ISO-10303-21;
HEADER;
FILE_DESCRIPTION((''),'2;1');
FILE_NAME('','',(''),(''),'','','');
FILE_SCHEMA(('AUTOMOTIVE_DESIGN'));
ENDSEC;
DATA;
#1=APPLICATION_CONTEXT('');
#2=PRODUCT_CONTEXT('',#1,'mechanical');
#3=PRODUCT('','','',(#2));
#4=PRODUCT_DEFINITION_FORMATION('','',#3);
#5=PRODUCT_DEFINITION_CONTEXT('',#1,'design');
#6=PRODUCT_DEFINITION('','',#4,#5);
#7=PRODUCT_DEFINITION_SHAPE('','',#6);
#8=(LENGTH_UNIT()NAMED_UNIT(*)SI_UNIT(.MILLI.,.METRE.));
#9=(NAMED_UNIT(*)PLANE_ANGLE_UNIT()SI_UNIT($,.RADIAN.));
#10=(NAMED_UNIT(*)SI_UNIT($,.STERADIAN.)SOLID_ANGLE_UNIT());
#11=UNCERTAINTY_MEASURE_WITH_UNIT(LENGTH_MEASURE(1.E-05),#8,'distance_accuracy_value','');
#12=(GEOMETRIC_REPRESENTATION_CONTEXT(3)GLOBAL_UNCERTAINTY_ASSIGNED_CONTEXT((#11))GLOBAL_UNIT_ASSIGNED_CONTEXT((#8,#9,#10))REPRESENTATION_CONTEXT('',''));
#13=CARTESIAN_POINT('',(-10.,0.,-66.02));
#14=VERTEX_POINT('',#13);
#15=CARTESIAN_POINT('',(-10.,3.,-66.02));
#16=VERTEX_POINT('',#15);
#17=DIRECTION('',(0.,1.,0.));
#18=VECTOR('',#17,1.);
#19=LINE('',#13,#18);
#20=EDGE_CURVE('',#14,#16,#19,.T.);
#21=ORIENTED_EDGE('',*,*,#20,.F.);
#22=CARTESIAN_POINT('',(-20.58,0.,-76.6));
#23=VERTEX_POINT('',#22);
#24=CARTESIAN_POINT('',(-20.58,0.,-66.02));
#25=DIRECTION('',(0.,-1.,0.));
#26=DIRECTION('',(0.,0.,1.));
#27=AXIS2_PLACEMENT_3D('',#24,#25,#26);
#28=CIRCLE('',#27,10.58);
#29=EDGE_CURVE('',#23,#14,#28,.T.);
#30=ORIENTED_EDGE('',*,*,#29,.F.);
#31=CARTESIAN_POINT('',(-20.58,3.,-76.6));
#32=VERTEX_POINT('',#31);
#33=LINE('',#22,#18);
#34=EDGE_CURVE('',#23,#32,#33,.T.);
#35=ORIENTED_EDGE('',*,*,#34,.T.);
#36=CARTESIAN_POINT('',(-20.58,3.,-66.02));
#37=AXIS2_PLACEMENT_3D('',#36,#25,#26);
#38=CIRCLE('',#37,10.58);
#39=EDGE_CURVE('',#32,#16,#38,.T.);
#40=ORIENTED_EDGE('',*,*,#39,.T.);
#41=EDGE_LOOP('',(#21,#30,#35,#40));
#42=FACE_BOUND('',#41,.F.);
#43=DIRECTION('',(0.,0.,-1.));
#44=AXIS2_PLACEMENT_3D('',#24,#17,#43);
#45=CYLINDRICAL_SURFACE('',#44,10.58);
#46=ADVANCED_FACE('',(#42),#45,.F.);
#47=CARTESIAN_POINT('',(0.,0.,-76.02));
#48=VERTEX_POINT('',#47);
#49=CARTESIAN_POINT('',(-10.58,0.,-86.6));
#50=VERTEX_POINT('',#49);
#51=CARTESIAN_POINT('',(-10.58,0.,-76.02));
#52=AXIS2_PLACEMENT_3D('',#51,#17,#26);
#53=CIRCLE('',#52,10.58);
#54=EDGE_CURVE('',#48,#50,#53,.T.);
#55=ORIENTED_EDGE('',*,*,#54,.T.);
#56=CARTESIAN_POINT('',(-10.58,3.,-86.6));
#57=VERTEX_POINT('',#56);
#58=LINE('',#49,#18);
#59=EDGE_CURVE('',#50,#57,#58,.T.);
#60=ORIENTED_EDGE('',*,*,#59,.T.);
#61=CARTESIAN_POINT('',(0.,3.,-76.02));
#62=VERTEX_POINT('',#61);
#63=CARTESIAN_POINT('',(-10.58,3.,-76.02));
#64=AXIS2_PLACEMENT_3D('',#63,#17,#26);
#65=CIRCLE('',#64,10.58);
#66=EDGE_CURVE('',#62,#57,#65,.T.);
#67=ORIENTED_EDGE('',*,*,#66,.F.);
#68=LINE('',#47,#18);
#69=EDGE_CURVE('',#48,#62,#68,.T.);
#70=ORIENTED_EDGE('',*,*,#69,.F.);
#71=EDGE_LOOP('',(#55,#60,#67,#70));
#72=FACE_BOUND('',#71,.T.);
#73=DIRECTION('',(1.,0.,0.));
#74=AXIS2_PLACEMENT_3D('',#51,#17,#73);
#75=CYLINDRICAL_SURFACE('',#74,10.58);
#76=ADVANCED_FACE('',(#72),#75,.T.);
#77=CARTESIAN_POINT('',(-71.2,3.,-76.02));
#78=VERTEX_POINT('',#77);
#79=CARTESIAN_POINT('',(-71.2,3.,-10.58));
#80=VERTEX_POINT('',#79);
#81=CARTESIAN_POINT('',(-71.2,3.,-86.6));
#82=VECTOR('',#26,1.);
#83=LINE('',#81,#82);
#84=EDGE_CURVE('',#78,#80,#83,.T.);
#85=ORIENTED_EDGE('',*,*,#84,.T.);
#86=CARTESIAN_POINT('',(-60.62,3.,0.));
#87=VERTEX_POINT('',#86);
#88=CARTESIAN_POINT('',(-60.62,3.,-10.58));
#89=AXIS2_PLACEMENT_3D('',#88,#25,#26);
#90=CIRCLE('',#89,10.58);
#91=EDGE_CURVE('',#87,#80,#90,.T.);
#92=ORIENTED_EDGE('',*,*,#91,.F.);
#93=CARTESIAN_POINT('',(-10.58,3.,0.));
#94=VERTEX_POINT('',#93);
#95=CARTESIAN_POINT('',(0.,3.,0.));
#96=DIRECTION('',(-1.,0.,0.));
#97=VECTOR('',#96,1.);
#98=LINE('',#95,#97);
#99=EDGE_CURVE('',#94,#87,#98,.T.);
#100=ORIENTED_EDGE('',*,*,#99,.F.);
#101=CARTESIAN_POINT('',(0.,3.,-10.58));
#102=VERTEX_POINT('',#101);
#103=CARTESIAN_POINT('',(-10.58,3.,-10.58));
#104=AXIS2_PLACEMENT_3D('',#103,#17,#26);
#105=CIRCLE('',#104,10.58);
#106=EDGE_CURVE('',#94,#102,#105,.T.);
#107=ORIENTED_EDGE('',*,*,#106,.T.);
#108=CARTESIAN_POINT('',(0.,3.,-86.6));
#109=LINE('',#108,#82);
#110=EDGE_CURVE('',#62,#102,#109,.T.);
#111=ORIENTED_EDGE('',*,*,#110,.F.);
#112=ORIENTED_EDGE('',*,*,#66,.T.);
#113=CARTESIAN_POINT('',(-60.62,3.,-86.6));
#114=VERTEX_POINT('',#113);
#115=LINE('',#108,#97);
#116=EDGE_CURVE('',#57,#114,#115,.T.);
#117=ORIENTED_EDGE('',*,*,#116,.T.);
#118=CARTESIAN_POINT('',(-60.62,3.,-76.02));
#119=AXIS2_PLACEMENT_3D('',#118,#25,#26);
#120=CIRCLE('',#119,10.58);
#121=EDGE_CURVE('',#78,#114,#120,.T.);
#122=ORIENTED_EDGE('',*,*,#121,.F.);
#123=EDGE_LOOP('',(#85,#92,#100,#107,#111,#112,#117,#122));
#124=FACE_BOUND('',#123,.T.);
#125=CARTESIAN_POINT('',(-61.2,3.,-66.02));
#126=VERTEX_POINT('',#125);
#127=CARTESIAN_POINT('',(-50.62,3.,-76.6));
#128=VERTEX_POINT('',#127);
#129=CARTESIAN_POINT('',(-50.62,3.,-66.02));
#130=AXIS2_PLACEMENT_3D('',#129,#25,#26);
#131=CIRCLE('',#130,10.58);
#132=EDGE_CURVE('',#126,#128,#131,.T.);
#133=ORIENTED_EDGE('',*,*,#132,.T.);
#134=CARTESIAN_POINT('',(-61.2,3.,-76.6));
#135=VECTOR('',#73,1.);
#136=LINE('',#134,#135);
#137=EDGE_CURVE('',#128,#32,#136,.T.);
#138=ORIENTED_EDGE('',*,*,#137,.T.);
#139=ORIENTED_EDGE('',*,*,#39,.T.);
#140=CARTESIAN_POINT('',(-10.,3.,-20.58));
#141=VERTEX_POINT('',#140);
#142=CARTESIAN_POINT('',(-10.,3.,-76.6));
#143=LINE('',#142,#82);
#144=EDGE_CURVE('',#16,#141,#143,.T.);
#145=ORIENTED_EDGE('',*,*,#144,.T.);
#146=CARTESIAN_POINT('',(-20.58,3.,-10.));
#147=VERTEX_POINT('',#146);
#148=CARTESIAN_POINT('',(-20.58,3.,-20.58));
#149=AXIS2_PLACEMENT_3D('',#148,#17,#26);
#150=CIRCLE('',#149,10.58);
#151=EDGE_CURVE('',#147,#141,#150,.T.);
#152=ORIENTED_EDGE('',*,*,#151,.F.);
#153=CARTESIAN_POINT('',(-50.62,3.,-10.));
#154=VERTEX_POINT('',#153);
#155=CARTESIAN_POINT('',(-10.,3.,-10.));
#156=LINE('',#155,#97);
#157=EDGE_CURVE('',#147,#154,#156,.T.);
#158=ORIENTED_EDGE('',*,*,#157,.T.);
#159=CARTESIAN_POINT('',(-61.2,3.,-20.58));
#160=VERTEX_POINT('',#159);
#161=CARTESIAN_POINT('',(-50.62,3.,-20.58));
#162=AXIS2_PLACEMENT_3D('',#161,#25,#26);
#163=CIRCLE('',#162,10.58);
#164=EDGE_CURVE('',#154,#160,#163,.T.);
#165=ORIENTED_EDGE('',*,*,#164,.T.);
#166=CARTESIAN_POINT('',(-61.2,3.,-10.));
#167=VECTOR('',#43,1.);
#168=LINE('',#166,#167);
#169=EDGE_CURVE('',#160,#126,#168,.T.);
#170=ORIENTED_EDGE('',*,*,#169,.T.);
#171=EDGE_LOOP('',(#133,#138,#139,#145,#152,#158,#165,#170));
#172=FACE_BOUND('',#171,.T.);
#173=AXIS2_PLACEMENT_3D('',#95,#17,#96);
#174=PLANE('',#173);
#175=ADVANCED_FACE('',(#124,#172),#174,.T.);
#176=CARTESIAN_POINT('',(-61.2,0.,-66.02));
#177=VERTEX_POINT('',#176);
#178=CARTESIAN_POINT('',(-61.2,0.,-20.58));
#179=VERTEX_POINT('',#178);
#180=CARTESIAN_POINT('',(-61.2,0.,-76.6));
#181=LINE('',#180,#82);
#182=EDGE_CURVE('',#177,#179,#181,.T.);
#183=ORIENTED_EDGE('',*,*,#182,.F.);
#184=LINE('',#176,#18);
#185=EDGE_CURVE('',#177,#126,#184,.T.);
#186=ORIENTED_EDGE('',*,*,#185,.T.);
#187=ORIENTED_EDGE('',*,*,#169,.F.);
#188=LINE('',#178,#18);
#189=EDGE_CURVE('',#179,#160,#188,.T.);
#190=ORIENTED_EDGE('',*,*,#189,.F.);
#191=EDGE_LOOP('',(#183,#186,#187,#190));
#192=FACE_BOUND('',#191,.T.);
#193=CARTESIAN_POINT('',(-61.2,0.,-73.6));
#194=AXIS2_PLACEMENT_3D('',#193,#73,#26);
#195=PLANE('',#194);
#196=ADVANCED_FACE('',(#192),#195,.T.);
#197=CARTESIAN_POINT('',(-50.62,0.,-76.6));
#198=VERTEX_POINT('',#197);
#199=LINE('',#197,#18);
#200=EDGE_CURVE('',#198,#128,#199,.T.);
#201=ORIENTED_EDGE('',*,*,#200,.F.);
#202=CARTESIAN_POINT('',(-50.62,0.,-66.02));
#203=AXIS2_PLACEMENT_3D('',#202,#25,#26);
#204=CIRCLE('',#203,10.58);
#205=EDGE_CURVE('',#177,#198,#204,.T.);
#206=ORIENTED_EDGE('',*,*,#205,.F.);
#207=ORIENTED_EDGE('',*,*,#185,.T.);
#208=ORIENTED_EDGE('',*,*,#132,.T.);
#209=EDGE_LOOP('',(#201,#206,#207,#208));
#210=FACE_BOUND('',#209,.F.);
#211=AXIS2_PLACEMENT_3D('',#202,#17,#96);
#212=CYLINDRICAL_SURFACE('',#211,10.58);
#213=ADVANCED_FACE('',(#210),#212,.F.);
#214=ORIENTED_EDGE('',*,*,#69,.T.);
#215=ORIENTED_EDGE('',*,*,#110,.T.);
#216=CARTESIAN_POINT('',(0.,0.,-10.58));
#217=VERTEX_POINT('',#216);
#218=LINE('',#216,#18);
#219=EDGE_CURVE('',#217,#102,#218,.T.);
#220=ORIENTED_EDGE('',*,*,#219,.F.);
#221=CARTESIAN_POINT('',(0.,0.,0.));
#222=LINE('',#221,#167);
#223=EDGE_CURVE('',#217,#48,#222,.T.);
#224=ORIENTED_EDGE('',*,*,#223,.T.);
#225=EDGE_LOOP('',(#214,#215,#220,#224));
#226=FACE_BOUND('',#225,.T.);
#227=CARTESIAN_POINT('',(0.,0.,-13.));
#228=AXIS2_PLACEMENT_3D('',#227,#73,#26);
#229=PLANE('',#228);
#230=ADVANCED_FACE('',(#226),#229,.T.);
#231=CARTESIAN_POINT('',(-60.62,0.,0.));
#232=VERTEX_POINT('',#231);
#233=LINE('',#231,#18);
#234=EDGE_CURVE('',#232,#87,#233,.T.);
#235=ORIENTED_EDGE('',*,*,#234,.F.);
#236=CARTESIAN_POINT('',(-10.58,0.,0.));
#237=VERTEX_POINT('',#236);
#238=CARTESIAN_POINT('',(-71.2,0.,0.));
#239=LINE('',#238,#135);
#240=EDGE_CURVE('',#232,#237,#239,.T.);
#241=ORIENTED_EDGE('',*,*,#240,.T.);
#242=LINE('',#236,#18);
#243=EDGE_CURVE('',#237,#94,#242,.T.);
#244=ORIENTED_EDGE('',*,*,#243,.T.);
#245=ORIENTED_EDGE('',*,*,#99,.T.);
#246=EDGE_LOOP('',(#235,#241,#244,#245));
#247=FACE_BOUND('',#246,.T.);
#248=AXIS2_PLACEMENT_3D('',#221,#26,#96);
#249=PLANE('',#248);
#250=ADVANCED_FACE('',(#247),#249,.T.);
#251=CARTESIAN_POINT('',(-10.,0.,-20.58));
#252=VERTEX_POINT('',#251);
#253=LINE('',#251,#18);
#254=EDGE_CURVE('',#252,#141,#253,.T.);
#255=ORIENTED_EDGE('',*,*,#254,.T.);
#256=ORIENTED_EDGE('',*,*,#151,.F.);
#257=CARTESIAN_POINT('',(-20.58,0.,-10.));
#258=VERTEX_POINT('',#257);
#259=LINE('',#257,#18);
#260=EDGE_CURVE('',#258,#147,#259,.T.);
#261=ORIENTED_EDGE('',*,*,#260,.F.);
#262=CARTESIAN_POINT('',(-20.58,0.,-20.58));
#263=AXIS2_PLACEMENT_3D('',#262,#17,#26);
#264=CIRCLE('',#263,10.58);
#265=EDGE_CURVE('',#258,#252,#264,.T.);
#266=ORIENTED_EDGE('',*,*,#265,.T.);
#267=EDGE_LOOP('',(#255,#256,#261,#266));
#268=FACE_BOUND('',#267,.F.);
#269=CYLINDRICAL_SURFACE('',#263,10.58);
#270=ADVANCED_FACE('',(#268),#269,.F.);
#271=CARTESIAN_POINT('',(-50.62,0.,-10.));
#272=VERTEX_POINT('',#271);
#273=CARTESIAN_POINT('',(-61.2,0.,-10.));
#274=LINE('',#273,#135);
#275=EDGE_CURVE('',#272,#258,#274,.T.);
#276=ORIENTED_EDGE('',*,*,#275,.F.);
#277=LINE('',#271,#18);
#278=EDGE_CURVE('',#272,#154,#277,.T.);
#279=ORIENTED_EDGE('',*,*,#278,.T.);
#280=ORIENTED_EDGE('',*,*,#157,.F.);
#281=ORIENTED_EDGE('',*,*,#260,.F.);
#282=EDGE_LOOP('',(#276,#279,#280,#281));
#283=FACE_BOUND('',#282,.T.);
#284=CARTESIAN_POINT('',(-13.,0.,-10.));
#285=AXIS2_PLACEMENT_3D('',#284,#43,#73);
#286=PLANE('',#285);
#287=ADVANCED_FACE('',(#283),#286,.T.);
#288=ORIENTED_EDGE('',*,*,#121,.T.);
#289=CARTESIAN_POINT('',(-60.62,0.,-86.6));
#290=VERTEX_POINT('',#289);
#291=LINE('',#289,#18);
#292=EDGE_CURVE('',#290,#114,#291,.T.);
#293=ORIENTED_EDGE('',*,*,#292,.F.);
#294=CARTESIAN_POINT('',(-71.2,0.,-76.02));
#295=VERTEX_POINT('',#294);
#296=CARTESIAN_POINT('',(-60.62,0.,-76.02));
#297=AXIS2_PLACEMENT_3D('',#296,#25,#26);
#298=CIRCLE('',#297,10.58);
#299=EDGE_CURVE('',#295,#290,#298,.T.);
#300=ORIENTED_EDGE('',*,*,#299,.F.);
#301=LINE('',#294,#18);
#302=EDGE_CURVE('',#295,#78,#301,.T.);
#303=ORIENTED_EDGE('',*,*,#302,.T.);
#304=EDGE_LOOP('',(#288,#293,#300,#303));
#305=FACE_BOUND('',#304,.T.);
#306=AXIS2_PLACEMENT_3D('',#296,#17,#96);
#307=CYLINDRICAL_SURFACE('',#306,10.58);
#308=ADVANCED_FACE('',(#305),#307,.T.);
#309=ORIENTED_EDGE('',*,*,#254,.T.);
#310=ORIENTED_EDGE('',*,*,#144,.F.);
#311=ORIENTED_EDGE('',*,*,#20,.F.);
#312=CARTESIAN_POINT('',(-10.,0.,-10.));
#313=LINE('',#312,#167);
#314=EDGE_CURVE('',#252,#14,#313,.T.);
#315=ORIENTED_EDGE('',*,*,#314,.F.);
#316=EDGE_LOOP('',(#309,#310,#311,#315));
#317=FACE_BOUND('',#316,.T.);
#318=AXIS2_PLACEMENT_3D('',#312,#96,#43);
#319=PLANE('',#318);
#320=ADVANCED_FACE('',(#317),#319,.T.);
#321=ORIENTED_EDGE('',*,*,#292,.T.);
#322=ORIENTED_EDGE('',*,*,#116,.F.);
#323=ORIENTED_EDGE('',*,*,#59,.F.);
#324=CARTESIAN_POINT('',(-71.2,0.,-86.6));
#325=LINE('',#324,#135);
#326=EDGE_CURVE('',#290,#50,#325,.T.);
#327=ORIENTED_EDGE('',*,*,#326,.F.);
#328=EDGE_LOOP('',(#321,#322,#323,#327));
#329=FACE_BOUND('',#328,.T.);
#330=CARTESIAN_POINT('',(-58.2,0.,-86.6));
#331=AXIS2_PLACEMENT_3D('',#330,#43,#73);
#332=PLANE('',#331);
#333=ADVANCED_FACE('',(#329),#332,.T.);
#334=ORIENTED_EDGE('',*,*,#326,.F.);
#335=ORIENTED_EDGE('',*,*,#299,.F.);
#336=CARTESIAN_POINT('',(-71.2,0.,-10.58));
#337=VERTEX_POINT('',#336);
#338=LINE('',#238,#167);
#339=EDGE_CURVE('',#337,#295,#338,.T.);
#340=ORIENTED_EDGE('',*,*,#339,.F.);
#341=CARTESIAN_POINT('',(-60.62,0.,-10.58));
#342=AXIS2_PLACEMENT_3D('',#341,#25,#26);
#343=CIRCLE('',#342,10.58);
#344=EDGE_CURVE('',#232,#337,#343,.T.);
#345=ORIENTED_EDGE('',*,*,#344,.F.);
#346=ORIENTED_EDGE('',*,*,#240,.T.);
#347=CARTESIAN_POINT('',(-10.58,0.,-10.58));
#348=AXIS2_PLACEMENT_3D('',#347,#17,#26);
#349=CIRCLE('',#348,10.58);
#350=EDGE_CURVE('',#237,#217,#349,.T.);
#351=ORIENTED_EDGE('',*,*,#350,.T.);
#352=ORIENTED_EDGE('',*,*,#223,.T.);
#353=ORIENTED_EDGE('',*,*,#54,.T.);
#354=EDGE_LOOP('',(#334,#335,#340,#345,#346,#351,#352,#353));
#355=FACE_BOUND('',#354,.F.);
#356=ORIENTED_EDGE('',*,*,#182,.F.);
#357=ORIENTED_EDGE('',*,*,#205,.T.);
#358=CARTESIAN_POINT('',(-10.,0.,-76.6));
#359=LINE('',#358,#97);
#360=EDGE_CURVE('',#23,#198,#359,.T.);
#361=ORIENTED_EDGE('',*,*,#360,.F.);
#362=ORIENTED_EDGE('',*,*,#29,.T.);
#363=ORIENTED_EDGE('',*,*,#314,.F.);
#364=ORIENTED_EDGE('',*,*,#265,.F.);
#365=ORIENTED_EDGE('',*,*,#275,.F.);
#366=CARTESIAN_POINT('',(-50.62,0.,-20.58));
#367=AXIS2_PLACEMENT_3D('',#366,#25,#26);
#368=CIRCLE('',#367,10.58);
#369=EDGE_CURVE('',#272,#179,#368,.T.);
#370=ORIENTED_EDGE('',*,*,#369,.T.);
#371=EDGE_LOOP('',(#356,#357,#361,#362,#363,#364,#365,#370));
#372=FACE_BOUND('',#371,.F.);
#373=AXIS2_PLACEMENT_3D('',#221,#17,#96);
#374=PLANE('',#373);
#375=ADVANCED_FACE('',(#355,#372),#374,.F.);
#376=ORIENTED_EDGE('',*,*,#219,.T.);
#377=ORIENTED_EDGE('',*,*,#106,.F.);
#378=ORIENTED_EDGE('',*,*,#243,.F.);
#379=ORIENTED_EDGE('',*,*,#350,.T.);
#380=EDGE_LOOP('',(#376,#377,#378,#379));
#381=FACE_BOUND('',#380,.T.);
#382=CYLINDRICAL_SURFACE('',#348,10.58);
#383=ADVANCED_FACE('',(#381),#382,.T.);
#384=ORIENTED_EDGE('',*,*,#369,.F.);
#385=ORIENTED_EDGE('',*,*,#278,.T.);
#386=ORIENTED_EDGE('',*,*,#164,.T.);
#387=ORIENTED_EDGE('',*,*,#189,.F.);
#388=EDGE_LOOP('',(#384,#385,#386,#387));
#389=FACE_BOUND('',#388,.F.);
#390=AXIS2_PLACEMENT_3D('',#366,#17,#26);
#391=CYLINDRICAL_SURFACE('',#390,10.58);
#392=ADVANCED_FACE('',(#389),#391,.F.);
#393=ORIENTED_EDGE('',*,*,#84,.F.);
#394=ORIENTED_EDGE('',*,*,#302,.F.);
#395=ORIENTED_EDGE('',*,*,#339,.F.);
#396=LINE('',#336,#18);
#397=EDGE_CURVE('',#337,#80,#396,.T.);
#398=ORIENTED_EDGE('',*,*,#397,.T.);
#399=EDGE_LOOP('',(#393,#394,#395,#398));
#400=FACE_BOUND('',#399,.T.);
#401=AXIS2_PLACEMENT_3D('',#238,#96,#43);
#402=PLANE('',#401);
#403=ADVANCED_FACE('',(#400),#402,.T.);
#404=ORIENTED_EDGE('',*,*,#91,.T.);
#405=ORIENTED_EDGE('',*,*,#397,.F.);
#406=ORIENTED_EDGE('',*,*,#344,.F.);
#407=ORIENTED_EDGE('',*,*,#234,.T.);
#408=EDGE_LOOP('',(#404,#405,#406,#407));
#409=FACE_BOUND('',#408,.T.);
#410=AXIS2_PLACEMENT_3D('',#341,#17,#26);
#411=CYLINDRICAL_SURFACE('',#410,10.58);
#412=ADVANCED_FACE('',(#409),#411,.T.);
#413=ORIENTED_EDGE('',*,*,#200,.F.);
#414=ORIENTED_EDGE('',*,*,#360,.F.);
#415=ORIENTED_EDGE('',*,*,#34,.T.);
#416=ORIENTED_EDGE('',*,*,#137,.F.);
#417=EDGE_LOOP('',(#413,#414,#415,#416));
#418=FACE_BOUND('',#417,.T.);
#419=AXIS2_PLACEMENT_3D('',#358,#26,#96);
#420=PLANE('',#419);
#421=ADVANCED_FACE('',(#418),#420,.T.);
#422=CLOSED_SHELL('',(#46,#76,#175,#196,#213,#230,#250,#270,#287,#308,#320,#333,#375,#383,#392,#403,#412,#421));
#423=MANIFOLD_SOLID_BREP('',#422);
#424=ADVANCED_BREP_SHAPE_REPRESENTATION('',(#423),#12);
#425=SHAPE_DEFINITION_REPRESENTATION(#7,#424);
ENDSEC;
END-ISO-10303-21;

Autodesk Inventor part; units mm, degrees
ref_plane "YZ Plane" through (0, 0, 0) normal (1, 0, 0) x (0, 1, 0)
ref_plane "XZ Plane" through (0, 0, 0) normal (0, 1, 0) x (-1, 0, 0)
ref_plane "XY Plane" through (0, 0, 0) normal (0, 0, 1) x (1, 0, 0)
sketch "Sketch1" plane through (0, 0, 0) normal (0, 1, 0) x (-1, 0, 0)
  line L0 (0, 0) -> (13, 0)
  line L1 (13, 0) -> (13, -13)
  line L2 (13, -13) -> (0, -13)
  line L3 (0, -13) -> (0, 0)
  line L4 (13, -13) -> (58.2, -13)
  line L5 (58.2, -13) -> (58.2, -73.6)
  line L6 (58.2, -73.6) -> (13, -73.6)
  line L7 (13, -73.6) -> (13, -13)
  line L8 (58.2, -73.6) -> (71.2, -73.6)
  line L9 (71.2, -73.6) -> (71.2, -86.6)
  line L10 (71.2, -86.6) -> (58.2, -86.6)
  line L11 (58.2, -86.6) -> (58.2, -73.6)
  line L12 (0, 0) -> (71.2, 0)
  line L13 (71.2, 0) -> (71.2, -86.6)
  line L14 (71.2, -86.6) -> (0, -86.6)
  line L15 (0, -86.6) -> (0, 0)
  line L16 (58.2, -13) -> (61.2, -13)
  line L17 (61.2, -13) -> (61.2, -10)
  line L18 (61.2, -10) -> (58.2, -10)
  line L19 (58.2, -10) -> (58.2, -13)
  line L20 (13, -73.6) -> (10, -73.6)
  line L21 (10, -73.6) -> (10, -76.6)
  line L22 (10, -76.6) -> (13, -76.6)
  line L23 (13, -76.6) -> (13, -73.6)
  line L24 (61.2, -10) -> (10, -10)
  line L25 (10, -10) -> (10, -76.6)
  line L26 (10, -76.6) -> (61.2, -76.6)
  line L27 (61.2, -76.6) -> (61.2, -10)
  dimension "d0" = 13
  dimension "d1" = 13
  dimension "d2" = 45.2
  dimension "d3" = 60.6
  dimension "d4" = 13
  dimension "d5" = 13
  dimension "d6" = 3
  dimension "d7" = 3
  dimension "d8" = 3
  dimension "d9" = 3
extrude "Extrusion1" add sketch "Sketch1" along normal blind 3 contours L0 L1 L24 L25 L2 L3 | L12 L13 L8 L27 L17 L18 L24 L1 | L2 L25 L21 L22 L26 L11 L14 L15 | L9 L10 L11 L26 L27 L8
fillet "Fillet1" radius 10.58 4 edges at (0, 1.5, 0) (0, 1.5, -86.6) (-71.2, 1.5, -86.6) (-71.2, 1.5, 0)
fillet "Fillet2" radius 10.58 4 edges at (-61.2, 1.5, -76.6) (-61.2, 1.5, -10) (-10, 1.5, -10) (-10, 1.5, -76.6)
properties part number "Airpods Pro Top"
